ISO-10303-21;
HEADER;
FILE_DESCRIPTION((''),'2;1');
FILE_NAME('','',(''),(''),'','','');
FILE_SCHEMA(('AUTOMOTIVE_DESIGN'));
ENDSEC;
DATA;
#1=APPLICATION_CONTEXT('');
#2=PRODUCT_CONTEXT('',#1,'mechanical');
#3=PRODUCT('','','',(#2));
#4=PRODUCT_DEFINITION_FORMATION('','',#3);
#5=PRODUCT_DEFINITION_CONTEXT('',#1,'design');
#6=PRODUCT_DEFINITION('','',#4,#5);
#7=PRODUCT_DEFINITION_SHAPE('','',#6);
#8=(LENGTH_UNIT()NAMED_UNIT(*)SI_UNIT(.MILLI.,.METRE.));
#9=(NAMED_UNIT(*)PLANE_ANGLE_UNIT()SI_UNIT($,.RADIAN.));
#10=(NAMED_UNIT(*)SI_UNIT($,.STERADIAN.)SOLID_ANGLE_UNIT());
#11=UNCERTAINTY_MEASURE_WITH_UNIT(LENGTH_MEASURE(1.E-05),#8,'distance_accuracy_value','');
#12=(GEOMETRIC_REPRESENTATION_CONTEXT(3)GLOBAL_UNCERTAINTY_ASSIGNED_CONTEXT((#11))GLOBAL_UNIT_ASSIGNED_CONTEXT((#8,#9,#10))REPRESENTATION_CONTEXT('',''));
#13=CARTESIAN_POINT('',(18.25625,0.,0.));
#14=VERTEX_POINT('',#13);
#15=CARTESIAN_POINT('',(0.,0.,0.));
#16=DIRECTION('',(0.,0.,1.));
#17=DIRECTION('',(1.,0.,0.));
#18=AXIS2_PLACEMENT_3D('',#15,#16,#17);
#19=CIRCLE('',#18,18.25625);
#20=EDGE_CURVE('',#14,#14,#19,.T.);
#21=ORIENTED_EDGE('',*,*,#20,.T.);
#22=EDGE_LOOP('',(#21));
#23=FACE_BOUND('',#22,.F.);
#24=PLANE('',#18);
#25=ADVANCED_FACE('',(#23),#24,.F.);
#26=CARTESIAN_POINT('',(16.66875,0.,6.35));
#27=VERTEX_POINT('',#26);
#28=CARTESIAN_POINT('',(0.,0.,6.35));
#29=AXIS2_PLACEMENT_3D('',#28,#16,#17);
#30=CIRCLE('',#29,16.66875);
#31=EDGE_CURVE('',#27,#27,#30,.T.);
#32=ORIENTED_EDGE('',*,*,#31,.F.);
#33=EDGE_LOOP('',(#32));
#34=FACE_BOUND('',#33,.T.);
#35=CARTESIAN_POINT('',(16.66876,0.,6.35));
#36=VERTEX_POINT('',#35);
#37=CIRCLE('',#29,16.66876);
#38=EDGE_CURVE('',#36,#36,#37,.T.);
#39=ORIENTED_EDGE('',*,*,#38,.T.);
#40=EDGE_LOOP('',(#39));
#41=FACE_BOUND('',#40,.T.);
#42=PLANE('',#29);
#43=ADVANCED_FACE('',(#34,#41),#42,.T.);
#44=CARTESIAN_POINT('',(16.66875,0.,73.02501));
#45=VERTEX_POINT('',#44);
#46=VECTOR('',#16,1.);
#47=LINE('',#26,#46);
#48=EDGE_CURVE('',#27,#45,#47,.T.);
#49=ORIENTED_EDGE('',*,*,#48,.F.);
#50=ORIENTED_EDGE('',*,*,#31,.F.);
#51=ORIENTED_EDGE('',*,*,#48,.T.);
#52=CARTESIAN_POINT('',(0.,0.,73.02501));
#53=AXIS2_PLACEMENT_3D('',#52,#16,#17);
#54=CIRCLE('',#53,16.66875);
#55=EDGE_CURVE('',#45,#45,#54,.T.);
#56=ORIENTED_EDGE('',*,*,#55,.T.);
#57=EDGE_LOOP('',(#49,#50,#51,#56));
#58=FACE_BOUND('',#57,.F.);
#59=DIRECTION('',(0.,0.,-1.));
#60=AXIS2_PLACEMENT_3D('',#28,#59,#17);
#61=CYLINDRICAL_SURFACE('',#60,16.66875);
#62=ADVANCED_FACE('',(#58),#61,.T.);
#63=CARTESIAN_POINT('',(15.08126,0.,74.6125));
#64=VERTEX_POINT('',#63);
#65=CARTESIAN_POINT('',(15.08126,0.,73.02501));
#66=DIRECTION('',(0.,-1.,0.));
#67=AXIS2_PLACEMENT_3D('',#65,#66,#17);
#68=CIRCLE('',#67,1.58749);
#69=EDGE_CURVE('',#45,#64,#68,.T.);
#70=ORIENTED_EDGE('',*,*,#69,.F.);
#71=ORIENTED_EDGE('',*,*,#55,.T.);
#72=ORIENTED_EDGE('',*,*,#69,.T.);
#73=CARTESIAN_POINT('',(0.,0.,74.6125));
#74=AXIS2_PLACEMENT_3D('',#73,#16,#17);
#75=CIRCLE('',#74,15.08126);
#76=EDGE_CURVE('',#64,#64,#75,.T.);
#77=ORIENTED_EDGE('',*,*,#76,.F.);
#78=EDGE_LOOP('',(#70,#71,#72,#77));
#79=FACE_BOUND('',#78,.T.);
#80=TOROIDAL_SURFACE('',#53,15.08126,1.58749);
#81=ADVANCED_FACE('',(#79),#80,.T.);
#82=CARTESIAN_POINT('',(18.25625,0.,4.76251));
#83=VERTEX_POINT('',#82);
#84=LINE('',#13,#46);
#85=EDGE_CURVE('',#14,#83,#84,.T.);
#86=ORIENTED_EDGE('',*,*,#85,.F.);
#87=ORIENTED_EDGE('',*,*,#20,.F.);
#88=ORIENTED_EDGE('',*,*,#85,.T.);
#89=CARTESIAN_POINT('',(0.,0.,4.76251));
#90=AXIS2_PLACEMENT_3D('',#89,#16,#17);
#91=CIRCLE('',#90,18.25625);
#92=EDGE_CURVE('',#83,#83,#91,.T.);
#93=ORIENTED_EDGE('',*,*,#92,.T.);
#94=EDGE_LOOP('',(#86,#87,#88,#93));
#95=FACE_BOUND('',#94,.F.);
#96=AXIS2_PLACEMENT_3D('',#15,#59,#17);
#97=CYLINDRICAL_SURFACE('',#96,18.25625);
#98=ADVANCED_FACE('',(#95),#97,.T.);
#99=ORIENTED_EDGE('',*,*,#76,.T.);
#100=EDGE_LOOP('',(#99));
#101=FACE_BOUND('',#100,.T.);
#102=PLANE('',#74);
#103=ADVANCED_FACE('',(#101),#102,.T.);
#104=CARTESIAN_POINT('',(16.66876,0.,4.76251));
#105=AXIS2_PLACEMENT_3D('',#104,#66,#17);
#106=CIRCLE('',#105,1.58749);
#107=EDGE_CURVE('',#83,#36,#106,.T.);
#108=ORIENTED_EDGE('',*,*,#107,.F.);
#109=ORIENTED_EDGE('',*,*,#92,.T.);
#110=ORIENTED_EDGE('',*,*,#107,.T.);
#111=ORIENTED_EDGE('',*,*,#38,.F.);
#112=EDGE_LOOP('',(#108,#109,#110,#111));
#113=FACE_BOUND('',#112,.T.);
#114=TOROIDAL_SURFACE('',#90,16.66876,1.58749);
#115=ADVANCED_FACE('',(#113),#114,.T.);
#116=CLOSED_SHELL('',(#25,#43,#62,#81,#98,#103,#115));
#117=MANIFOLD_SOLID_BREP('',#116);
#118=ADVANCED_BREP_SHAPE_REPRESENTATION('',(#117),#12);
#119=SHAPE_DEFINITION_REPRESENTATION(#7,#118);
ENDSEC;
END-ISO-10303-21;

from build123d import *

# Parameters (mm, degrees)
F0_R     = 18.25625
F1_DEPTH = 6.35
F2_R     = 16.66875
F3_DEPTH = 68.2625
F4_R     = 1.58749


# Not quite as in the source:
# - a fillet or chamfer is up to 0.001 mm smaller than in the source, because OpenCascade refuses the exact size


with BuildPart() as f1:
    # F0 (on Top) → F1 (new body)
    with BuildSketch(Plane.XY):
        Circle(F0_R)
    extrude(amount=F1_DEPTH)

    # F2 (on face) → F3 (join)
    with BuildSketch(Plane.XY.offset(6.35)):
        Circle(F2_R)
    extrude(amount=F3_DEPTH)

    # F4 (radius 1.5875 in the source; OpenCascade refuses exactly that, so slightly less here)
    f4_edges = [f1.edges().sort_by_distance(p)[0] for p in [
        (-18.25625, 0, 6.35),
        (-16.66875, 0, 74.6125),
    ]]
    fillet(f4_edges, radius=F4_R)


solid = f1.part
